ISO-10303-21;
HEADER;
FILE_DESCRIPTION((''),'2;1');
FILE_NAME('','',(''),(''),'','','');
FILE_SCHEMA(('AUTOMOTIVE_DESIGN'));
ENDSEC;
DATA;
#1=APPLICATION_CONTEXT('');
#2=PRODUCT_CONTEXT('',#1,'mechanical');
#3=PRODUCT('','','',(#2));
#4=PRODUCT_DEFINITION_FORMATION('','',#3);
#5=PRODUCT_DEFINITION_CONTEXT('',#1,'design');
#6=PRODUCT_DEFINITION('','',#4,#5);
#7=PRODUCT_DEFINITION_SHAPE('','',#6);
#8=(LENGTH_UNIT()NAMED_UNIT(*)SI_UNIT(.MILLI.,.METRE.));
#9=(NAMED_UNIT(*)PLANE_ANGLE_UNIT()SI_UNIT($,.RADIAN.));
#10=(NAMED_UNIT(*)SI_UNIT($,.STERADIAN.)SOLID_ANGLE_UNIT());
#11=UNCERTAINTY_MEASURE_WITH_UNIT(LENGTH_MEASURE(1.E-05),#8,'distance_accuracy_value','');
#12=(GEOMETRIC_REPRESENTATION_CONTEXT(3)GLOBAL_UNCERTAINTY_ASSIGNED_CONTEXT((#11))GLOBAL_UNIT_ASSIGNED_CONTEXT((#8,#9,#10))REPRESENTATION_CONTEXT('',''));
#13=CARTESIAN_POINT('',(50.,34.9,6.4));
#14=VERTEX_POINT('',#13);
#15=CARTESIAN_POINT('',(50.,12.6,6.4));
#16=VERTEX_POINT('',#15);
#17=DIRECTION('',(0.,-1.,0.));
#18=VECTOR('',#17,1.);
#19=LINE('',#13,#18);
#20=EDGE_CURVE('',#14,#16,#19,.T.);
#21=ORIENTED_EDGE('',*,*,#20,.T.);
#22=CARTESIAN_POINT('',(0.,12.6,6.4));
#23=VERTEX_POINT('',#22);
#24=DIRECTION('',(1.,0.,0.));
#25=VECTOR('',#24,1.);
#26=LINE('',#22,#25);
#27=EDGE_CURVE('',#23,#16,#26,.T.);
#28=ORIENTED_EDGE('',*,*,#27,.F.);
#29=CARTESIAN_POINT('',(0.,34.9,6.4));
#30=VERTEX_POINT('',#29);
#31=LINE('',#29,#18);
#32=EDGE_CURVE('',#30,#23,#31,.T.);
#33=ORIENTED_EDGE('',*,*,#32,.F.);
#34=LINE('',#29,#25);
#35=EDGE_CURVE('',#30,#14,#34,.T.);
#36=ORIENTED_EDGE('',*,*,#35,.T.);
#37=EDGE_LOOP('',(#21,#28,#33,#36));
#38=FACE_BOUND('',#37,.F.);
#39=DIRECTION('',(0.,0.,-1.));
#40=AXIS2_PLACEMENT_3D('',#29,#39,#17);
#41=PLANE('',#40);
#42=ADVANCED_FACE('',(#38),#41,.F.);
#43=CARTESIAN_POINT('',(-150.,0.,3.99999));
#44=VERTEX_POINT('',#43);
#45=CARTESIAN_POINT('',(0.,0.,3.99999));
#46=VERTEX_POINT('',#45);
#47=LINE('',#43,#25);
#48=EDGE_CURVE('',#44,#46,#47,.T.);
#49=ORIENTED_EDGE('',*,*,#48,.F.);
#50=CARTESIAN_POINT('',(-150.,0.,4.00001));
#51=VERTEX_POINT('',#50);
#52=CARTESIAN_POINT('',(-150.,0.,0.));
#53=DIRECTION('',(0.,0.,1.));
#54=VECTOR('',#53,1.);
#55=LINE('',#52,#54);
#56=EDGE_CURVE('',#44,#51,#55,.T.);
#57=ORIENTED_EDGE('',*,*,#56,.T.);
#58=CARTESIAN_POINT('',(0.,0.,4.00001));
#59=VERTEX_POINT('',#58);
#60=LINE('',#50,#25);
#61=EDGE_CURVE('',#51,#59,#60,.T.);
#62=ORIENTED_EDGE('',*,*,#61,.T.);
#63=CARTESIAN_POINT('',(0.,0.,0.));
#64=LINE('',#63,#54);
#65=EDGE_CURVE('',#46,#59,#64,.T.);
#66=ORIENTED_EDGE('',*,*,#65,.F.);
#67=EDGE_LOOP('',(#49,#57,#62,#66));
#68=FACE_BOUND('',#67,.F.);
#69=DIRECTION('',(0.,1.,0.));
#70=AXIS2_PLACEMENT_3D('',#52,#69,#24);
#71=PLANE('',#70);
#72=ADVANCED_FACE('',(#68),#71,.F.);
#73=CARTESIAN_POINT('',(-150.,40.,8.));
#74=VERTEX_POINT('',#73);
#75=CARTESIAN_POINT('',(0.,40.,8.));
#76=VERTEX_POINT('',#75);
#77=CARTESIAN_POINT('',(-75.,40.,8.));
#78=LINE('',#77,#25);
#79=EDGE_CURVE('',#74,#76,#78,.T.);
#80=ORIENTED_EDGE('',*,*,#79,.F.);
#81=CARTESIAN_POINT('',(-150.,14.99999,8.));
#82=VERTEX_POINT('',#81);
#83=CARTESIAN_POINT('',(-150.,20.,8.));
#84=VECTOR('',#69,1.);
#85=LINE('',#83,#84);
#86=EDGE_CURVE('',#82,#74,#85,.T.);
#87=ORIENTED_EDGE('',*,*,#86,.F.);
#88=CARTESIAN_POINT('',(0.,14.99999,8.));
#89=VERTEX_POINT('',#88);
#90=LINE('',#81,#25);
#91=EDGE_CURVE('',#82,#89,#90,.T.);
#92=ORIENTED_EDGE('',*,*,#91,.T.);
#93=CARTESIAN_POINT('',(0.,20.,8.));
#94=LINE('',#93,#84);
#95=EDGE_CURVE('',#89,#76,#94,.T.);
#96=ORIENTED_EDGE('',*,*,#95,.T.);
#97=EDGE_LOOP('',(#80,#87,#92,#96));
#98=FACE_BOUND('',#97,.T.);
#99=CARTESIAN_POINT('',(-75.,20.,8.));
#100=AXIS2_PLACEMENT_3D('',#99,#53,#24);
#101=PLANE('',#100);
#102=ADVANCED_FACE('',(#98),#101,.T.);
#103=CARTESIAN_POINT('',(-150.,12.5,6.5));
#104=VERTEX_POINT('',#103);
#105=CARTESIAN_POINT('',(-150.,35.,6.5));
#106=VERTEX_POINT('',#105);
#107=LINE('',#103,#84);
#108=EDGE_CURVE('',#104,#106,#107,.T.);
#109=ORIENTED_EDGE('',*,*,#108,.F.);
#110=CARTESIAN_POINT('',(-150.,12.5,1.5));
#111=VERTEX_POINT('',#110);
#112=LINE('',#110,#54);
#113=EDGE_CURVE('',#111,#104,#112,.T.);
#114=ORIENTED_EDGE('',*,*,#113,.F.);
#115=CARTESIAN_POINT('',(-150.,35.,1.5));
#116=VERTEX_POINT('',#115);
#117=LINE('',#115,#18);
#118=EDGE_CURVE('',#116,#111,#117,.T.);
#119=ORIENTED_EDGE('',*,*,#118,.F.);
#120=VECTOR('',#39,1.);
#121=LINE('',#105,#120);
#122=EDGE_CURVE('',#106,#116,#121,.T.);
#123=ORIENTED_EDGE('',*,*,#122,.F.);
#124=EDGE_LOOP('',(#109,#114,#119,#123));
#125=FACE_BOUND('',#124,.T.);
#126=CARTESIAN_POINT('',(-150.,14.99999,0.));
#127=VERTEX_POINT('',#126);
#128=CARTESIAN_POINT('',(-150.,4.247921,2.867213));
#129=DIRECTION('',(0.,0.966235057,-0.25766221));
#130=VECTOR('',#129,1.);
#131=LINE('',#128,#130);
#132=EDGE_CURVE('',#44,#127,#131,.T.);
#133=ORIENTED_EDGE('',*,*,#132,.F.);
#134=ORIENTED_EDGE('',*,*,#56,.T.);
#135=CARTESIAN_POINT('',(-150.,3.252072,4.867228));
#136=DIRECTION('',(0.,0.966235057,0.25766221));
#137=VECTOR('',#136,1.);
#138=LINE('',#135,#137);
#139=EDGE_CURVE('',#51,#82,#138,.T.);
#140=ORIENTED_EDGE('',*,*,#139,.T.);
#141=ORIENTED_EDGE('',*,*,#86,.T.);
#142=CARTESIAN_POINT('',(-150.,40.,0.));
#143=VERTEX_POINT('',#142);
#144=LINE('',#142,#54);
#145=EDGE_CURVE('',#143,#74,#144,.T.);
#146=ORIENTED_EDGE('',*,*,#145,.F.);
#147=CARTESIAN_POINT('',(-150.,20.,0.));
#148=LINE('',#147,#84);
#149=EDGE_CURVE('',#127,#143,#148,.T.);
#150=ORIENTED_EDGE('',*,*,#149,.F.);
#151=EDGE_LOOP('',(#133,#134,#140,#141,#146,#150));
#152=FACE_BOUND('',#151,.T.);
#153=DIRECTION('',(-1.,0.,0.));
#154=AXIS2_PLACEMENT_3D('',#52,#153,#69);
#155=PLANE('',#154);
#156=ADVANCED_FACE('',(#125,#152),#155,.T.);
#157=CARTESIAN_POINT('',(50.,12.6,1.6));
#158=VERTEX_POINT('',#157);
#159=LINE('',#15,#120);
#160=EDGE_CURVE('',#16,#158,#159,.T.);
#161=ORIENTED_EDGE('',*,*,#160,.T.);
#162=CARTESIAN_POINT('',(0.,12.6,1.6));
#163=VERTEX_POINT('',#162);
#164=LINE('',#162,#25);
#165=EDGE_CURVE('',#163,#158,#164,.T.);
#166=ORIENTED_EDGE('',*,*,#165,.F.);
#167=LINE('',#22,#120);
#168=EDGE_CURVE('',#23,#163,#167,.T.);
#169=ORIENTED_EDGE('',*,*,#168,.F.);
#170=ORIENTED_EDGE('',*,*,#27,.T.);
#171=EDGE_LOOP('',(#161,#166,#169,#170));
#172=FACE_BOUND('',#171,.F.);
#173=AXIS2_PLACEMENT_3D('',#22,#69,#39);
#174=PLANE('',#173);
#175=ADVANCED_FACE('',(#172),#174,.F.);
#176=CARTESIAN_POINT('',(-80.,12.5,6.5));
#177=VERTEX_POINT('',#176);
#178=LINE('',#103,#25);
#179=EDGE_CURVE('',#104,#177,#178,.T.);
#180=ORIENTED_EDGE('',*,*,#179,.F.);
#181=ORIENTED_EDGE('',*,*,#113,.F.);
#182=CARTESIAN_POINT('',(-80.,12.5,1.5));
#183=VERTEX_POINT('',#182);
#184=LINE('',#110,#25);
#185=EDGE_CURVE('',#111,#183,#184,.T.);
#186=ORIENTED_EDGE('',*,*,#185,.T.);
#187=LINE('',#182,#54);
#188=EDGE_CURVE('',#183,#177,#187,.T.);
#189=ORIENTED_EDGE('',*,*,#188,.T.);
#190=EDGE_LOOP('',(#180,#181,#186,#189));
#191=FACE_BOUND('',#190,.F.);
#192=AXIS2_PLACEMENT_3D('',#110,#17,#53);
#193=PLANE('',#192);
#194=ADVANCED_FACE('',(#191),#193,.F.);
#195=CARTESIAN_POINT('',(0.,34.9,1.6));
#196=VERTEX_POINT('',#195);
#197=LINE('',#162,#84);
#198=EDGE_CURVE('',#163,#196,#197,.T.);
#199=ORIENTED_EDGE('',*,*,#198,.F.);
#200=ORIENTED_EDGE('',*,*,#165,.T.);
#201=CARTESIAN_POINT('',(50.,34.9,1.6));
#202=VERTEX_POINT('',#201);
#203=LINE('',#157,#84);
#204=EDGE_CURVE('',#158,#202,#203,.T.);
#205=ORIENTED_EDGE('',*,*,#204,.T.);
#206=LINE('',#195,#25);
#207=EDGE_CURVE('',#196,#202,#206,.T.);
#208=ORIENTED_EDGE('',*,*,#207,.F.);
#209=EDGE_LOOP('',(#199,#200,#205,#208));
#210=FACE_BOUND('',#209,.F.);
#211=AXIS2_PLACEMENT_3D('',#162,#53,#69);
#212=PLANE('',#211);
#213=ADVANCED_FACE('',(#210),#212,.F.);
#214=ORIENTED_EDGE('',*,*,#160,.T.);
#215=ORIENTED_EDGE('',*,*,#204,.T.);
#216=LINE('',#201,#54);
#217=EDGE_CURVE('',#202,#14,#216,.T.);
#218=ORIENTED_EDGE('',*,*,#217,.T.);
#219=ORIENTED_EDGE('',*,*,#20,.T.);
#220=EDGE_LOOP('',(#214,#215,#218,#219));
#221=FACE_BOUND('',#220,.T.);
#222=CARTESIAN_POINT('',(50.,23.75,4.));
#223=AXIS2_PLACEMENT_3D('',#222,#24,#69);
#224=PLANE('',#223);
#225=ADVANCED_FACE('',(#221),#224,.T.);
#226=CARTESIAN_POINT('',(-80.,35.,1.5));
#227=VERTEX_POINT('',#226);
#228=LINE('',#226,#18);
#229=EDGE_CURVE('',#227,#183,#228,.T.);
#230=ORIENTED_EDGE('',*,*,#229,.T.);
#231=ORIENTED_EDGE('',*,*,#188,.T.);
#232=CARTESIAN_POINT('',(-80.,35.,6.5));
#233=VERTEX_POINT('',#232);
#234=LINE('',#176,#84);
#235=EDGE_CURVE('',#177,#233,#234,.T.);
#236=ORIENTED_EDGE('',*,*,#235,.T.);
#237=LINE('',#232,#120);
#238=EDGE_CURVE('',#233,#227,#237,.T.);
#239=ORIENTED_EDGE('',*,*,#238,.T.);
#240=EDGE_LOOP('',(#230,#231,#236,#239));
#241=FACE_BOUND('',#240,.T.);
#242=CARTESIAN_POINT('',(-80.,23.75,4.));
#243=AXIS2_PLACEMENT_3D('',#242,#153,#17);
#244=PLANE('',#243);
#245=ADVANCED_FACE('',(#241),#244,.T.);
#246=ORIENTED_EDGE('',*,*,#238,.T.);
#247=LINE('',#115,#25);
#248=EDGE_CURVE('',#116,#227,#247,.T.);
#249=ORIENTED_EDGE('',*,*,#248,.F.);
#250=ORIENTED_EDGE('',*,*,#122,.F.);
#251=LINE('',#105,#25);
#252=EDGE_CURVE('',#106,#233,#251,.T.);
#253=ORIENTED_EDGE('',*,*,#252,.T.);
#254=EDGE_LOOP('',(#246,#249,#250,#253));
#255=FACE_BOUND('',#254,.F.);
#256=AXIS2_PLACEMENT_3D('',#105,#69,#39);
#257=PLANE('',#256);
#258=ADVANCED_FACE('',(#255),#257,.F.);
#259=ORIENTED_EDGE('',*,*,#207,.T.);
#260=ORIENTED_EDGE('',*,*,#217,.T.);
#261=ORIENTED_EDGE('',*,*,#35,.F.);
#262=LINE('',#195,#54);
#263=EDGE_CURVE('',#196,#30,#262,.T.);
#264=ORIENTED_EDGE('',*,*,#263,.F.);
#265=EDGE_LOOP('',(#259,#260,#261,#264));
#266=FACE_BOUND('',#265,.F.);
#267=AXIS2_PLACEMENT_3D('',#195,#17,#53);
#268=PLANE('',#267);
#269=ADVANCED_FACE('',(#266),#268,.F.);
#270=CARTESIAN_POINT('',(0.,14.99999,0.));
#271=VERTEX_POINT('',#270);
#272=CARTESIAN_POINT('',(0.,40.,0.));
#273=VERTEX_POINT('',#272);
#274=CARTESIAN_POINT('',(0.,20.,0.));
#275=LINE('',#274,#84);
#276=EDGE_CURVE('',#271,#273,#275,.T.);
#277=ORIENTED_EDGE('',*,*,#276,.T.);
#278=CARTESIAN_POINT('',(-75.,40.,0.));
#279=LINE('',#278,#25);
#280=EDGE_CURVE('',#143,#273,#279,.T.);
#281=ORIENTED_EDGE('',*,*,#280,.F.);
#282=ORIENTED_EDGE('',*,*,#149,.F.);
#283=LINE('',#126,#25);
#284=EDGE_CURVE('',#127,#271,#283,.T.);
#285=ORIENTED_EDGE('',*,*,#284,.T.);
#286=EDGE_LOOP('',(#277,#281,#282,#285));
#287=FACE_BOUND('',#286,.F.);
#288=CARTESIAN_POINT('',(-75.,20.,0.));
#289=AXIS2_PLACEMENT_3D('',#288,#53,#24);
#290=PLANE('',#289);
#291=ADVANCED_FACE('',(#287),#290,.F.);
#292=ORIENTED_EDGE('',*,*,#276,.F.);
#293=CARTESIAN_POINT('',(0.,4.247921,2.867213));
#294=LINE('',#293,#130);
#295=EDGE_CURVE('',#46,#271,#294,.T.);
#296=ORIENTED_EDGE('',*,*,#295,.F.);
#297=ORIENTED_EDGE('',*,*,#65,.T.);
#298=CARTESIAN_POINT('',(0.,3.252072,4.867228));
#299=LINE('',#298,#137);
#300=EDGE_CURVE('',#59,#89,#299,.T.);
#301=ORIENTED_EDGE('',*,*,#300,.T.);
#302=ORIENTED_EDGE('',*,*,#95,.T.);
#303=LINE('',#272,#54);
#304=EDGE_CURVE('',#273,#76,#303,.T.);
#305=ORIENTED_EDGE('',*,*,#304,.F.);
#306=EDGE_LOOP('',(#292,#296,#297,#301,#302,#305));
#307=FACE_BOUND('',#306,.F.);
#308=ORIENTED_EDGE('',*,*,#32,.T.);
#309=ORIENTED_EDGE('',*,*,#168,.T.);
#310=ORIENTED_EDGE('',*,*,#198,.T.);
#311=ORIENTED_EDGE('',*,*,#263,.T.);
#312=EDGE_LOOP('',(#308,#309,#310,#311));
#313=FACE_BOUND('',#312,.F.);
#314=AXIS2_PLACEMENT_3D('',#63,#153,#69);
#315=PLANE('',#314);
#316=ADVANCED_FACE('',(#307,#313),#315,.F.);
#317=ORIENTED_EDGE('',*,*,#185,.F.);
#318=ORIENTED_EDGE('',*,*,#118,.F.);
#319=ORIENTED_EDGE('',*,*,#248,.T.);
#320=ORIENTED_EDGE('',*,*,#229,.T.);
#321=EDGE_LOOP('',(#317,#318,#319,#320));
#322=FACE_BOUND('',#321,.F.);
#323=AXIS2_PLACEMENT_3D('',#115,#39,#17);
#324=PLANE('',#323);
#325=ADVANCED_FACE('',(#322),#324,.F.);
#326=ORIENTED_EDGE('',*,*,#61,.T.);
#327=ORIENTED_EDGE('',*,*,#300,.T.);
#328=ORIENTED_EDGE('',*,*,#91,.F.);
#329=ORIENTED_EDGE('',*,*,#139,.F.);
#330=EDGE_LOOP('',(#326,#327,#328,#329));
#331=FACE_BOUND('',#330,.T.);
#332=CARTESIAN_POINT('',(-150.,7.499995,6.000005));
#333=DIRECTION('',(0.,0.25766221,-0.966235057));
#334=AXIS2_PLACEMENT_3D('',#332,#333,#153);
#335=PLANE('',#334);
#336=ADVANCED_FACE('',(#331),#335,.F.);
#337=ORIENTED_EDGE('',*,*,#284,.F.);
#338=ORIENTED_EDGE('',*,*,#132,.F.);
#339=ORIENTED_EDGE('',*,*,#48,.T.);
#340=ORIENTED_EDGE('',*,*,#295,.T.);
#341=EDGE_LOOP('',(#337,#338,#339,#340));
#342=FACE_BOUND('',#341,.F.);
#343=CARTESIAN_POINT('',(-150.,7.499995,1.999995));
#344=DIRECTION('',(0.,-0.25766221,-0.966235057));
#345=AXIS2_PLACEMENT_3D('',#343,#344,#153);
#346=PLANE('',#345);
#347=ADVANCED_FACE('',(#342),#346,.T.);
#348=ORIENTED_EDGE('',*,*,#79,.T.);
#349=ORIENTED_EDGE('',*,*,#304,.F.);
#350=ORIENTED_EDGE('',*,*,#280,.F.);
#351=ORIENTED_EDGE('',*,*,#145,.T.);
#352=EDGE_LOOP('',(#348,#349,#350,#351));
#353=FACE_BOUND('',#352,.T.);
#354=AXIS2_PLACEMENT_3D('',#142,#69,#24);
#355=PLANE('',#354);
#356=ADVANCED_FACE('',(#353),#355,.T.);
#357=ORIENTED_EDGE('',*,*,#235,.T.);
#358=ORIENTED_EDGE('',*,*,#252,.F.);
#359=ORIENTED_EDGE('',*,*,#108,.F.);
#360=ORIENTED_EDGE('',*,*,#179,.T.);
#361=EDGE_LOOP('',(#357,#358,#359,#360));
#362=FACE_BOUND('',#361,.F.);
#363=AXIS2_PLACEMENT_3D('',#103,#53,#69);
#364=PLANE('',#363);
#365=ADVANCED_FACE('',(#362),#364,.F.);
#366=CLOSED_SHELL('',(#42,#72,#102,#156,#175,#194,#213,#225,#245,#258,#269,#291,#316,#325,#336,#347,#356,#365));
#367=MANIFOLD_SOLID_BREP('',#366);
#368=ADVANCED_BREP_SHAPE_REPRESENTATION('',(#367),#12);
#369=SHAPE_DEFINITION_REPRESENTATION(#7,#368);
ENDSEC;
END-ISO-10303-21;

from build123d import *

# Parameters (mm, degrees)
F0_W     = 150
F0_H     = 40
F1_DEPTH = 8
F2_SIZE2 = 14.99999
F2_SIZE  = 3.99999
F4_DEPTH = 70
F6_DEPTH = 50


# Not quite as in the source:
# - a fillet or chamfer is up to 0.001 mm smaller than in the source, because OpenCascade refuses the exact size


with BuildPart() as f1:
    # F0 (on Top) → F1 (new body)
    with BuildSketch(Plane.XY):
        with Locations((-75, 20)):
            Rectangle(F0_W, F0_H)
    extrude(amount=F1_DEPTH)

    # F2 (size 4 and 15 in the source; OpenCascade refuses exactly that, so slightly less here)
    f2_edges = [f1.edges().sort_by_distance(p)[0] for p in [
        (-75, 0, 8),
        (-75, 0, 0),
    ]]
    f2_side = f1.faces().sort_by_distance((-75, 0, 4))[0]
    chamfer(f2_edges, length=F2_SIZE, length2=F2_SIZE2, reference=f2_side)

    # F3 (on face) → F4 (cut)
    with BuildSketch(Plane(origin=(-150, 0, 0), x_dir=(0, -1, 0), z_dir=(-1, 0, 0))):
        Polygon((-12.5, 1.5), (-12.5, 4), (-12.5, 6.5), (-35, 6.5), (-35, 1.5), align=None)
    extrude(amount=-F4_DEPTH, mode=Mode.SUBTRACT)

    # F5 (on face) → F6 (join)
    with BuildSketch(Plane.YZ):
        Polygon((12.6, 6.4), (12.6, 4), (12.6, 1.6), (34.9, 1.6), (34.9, 6.4), align=None)
    extrude(amount=F6_DEPTH)


solid = f1.part
